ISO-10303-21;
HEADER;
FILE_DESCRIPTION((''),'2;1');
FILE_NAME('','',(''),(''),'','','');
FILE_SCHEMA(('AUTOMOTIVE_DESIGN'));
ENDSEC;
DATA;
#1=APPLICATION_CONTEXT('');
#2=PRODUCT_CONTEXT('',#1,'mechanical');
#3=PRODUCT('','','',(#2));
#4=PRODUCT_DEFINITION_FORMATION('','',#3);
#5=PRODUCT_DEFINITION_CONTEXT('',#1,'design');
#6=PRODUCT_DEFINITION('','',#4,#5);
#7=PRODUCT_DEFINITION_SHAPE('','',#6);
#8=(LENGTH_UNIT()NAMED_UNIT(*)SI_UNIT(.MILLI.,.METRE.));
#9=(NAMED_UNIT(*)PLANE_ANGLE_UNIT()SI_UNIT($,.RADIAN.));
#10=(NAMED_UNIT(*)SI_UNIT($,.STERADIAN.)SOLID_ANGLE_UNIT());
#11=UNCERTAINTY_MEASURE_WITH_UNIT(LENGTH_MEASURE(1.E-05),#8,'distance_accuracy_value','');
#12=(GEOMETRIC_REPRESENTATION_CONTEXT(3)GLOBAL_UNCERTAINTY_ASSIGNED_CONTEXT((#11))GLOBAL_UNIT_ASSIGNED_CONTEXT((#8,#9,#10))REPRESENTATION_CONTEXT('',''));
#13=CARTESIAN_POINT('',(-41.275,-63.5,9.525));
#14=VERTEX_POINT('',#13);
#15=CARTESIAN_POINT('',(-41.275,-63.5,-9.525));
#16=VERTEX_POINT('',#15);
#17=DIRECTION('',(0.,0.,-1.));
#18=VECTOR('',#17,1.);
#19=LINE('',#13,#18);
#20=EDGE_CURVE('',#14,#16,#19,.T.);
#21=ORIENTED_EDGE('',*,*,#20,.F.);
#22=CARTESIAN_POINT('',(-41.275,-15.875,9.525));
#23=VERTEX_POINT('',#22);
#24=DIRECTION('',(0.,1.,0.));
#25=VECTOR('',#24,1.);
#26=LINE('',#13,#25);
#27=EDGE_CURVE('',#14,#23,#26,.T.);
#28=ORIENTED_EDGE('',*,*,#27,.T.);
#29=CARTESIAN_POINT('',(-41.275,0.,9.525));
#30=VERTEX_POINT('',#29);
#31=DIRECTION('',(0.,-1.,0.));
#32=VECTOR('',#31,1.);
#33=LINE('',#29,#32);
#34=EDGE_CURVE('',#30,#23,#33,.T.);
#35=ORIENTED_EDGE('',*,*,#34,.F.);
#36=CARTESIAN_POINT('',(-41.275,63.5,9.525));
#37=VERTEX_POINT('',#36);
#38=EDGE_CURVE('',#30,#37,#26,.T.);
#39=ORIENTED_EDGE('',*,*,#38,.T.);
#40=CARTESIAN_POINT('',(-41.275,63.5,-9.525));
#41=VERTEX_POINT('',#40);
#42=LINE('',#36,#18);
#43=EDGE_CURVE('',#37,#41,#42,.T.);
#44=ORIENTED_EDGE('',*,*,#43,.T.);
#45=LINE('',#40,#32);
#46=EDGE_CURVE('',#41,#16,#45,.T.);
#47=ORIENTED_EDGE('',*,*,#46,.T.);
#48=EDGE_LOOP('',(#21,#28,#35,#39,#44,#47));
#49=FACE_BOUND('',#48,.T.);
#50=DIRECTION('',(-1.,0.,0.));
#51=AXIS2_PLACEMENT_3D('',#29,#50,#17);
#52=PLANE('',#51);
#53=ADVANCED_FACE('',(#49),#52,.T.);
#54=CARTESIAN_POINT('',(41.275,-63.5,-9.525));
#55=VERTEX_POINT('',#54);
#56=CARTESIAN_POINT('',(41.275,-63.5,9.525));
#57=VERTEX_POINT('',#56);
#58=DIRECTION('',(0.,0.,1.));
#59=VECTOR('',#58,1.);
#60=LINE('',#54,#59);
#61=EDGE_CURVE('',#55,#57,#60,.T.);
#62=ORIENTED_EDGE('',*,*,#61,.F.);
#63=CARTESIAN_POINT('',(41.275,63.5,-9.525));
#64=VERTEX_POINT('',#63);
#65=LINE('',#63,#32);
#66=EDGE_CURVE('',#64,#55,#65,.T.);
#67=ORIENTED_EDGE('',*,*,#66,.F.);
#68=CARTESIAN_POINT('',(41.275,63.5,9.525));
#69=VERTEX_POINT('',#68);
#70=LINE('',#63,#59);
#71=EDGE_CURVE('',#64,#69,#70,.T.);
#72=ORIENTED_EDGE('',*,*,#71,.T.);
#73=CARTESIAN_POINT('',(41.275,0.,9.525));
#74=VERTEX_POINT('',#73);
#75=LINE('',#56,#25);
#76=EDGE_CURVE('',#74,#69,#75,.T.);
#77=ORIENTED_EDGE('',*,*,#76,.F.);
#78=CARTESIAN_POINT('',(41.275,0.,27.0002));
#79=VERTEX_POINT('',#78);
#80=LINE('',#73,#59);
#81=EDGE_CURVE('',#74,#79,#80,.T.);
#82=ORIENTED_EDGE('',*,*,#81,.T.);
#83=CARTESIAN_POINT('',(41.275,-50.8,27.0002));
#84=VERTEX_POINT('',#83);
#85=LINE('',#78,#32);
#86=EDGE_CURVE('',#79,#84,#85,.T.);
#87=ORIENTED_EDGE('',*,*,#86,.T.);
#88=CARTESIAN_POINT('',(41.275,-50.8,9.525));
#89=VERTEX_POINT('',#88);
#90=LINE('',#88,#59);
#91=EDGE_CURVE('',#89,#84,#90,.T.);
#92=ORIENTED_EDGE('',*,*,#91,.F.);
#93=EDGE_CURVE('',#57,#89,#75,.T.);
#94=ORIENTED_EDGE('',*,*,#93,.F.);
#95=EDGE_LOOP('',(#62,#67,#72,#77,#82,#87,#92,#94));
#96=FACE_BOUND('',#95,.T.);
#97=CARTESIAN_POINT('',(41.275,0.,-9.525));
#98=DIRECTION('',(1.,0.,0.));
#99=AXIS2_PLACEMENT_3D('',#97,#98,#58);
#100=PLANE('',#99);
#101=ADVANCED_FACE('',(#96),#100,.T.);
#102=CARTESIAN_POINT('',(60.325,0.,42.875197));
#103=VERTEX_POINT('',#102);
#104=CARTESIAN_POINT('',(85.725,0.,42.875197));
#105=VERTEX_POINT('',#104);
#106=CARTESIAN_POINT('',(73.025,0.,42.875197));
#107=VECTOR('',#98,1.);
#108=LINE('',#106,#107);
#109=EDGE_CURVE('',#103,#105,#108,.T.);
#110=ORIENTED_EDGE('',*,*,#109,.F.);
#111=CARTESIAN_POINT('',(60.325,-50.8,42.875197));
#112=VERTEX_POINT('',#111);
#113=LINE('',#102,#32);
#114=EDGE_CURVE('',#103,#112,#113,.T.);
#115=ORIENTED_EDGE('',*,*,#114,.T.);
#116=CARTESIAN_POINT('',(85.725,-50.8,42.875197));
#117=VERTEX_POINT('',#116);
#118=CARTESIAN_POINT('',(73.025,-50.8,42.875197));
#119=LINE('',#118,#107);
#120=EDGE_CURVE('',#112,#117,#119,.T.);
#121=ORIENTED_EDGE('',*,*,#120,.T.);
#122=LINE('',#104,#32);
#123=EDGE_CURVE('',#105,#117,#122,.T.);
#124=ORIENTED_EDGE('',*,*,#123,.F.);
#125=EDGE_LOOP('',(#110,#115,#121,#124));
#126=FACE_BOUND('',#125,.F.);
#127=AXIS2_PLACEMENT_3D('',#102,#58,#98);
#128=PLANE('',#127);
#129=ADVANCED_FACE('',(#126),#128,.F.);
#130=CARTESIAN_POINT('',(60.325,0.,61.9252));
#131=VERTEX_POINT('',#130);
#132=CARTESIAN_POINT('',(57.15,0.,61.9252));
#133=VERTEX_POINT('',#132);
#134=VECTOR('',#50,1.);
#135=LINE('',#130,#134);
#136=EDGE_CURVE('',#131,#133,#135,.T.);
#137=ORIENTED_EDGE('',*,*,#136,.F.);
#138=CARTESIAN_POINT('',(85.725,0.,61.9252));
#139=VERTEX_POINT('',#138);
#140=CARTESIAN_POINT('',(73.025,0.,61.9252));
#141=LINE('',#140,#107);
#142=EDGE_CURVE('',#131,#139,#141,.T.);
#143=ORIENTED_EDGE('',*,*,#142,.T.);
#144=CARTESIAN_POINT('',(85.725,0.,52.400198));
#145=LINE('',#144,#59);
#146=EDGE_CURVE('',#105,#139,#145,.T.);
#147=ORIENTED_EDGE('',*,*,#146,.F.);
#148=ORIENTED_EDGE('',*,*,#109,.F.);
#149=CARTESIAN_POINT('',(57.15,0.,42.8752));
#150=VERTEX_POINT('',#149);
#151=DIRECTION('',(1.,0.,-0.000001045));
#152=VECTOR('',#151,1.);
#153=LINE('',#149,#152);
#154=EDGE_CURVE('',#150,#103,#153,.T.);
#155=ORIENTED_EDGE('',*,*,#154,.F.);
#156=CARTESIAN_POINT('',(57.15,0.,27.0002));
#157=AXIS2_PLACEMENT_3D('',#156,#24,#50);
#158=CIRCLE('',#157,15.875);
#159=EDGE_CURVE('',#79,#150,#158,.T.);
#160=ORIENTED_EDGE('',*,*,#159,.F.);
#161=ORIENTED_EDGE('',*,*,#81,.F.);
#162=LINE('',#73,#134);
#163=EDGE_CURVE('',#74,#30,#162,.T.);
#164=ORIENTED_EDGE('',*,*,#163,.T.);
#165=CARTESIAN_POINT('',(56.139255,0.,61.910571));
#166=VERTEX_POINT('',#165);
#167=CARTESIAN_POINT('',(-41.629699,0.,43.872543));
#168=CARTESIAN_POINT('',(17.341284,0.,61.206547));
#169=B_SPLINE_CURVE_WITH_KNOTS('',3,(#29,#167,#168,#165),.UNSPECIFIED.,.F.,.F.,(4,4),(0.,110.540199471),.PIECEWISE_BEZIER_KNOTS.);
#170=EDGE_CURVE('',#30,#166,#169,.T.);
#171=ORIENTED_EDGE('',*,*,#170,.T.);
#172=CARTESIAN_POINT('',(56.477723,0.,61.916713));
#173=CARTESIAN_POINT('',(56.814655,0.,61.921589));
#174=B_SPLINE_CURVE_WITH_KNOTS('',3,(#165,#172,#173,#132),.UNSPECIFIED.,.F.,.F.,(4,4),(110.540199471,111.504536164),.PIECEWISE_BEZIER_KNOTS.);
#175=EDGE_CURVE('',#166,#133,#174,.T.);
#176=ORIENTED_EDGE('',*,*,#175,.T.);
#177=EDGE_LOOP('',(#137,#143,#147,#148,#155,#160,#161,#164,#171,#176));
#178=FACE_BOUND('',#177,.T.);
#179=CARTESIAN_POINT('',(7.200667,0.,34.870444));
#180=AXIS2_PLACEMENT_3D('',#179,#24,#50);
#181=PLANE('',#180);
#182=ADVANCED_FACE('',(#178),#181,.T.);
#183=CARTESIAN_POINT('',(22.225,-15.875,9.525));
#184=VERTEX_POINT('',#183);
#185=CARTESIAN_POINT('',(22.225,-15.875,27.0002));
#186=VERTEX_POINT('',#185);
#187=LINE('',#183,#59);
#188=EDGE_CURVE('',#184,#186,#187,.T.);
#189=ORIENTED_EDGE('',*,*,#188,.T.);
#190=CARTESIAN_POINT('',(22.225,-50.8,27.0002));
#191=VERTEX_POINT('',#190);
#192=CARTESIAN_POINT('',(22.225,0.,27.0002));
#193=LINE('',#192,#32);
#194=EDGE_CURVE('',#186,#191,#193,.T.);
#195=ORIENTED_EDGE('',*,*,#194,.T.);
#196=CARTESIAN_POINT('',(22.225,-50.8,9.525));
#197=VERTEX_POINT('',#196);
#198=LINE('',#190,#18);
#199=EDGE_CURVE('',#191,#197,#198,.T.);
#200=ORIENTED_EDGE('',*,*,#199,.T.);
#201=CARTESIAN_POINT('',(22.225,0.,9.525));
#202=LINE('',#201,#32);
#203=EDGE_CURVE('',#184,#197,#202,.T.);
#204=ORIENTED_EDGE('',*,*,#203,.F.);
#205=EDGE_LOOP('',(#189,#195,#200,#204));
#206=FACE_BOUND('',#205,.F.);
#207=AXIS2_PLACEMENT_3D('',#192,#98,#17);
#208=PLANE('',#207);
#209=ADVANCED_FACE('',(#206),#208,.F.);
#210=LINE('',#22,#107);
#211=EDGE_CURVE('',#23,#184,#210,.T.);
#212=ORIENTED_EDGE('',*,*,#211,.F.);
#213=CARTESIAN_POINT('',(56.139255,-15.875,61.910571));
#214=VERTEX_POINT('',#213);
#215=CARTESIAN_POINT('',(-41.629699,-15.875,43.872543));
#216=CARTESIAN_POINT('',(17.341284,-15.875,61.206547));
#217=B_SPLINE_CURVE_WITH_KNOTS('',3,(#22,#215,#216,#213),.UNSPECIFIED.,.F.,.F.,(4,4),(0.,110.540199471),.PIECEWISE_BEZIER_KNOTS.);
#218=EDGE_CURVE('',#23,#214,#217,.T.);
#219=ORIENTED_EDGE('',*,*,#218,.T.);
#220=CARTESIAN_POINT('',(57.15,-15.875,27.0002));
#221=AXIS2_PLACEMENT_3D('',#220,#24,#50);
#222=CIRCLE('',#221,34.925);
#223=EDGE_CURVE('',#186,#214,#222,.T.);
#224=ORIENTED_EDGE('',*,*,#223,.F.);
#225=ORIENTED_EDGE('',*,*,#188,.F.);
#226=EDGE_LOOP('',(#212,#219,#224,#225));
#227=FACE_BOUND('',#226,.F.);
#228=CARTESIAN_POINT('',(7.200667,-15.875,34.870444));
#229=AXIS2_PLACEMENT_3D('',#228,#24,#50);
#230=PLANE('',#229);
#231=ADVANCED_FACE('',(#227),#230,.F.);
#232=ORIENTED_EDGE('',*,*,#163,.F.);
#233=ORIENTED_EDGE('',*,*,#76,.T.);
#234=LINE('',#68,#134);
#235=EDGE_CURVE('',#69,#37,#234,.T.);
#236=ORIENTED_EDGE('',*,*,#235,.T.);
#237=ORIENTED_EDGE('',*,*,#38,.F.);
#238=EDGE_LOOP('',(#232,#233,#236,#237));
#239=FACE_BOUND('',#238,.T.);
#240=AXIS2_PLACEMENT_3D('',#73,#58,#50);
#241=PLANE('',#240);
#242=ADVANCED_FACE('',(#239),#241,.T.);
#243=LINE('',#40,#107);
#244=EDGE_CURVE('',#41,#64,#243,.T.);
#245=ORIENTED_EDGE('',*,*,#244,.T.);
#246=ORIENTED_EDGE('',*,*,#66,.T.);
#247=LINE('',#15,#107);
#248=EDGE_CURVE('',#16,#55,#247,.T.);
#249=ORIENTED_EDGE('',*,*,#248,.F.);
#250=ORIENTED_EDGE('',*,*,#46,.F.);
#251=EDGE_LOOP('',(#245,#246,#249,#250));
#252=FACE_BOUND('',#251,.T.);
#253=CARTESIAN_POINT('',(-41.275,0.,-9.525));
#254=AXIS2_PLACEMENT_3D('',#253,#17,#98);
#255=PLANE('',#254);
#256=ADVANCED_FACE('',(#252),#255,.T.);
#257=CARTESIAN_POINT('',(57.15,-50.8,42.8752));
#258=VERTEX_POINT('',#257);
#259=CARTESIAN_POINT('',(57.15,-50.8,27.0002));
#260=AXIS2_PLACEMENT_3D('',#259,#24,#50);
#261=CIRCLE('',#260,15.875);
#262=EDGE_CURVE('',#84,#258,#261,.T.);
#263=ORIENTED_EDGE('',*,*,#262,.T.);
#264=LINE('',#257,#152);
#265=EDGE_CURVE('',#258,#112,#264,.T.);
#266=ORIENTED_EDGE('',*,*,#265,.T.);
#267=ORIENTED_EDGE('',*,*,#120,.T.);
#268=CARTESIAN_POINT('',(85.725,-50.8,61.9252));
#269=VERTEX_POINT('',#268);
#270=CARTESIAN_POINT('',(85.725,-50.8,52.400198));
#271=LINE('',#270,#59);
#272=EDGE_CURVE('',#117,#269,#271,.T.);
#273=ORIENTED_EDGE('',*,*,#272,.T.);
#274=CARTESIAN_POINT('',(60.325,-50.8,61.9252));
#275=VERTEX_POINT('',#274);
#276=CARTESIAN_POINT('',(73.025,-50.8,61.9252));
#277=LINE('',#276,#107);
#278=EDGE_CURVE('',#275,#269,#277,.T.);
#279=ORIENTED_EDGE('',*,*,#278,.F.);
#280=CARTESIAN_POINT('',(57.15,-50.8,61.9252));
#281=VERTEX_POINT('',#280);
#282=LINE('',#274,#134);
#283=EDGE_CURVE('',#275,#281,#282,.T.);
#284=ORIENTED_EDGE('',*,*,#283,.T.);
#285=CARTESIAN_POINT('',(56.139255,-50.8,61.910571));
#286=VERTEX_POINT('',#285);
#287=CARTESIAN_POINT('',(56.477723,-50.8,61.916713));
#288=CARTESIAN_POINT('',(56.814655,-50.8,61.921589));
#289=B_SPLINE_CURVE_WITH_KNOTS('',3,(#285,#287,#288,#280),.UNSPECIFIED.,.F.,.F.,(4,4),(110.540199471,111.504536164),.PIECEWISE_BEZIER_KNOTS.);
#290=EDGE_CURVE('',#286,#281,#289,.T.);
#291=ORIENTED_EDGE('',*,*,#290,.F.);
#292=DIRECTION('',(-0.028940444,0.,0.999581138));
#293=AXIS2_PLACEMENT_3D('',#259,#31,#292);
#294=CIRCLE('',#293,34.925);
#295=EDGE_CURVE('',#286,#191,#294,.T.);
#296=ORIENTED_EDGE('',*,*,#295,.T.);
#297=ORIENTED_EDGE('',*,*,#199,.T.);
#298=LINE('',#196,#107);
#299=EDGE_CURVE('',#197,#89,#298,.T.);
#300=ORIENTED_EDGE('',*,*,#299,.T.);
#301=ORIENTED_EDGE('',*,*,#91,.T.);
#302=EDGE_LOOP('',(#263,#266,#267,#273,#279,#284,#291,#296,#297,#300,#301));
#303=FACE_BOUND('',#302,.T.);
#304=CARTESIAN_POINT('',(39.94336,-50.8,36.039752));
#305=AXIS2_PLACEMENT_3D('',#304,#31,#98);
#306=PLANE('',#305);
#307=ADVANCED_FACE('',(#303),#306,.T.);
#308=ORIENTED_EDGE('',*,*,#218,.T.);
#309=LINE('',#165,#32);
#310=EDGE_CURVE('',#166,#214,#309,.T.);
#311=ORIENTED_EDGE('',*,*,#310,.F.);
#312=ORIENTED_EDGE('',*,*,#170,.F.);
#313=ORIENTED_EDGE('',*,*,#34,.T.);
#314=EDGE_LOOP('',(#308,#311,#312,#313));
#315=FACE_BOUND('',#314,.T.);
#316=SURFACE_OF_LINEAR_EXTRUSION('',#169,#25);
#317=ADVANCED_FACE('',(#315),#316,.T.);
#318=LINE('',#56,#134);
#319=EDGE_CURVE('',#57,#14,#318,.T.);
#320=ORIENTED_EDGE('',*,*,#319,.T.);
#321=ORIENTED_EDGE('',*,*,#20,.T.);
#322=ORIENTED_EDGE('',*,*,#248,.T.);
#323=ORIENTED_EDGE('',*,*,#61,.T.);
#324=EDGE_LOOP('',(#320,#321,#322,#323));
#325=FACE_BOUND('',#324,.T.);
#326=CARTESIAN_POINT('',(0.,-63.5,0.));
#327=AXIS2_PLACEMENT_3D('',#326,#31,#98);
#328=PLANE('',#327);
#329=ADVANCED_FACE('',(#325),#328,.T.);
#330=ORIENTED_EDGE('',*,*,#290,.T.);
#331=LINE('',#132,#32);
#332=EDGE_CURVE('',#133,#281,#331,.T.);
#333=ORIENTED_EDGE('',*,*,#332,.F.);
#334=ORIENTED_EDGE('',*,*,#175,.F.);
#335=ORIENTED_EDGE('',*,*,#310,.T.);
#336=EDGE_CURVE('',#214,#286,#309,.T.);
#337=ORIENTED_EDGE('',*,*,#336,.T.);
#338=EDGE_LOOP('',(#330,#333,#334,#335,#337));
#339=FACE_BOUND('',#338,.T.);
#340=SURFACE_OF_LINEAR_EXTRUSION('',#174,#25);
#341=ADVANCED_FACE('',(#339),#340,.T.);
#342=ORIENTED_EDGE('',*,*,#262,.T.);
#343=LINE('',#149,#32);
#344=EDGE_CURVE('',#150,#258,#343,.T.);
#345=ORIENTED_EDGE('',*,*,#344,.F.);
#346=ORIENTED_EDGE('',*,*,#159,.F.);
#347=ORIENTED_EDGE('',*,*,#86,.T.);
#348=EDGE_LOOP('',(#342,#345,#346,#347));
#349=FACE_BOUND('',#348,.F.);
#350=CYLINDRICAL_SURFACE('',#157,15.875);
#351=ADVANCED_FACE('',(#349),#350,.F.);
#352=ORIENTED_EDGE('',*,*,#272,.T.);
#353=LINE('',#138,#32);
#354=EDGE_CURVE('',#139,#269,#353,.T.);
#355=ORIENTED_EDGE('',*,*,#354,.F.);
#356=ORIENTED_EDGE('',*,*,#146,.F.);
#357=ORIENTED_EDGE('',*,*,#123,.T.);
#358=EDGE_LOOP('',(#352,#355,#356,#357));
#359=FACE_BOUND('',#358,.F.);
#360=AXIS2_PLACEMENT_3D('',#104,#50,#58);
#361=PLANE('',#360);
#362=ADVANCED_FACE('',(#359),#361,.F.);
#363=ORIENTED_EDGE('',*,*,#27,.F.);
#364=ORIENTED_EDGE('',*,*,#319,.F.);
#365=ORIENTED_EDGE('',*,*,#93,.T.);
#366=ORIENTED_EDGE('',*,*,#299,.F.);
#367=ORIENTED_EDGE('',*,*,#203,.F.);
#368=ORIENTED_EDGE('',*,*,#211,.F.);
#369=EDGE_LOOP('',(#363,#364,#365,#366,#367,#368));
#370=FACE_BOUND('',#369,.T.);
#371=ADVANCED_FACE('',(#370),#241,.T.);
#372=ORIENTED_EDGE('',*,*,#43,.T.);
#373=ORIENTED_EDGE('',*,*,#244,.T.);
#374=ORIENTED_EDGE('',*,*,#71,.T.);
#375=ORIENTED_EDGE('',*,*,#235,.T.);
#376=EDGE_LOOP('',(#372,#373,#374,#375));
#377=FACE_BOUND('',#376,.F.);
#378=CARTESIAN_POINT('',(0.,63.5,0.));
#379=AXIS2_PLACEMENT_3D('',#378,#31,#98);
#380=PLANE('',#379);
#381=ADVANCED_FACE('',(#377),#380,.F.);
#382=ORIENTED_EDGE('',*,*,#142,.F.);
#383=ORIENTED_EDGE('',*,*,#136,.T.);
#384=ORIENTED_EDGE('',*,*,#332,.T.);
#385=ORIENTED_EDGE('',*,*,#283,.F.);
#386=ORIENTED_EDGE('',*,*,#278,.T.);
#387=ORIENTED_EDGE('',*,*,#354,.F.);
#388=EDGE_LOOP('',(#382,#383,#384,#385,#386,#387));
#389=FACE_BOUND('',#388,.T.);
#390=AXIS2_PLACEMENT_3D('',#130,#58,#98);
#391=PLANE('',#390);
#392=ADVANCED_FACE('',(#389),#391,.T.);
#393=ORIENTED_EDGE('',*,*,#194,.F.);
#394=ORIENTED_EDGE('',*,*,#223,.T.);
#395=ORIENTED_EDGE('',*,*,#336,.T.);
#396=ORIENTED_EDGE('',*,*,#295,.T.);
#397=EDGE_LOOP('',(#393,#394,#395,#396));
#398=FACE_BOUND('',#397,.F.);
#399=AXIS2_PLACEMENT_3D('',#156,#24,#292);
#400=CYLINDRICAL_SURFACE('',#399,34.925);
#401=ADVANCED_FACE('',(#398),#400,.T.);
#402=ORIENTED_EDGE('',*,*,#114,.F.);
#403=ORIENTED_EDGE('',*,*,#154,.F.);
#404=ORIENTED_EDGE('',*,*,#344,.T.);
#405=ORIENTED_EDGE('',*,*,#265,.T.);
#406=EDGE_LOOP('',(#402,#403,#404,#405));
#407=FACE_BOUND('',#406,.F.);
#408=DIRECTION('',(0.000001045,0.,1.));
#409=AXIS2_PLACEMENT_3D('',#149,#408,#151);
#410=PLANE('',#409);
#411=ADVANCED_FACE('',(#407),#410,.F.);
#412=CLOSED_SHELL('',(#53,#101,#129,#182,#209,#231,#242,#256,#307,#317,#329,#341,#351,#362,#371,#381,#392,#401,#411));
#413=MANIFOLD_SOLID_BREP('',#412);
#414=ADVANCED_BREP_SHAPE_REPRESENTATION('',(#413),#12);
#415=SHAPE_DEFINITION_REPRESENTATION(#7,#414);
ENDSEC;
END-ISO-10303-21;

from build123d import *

# Parameters (mm, degrees)
F1_DEPTH = 63.5
F0_W     = 25.4
F0_H     = 19.0500033191
F2_DEPTH = 50.8
F3_DEPTH = 15.875


# Not quite as in the source:
# - ends of sketch curves that miss each other by under 0.0002 mm in the source are joined


with BuildPart() as f1:
    # F0 (on Front) → F1 (new body, symmetric)
    with BuildSketch(Plane.XZ):
        Polygon((-41.275, 9.525), (-41.275, -9.525), (41.275, -9.525), (41.275, 9.525), (22.225, 9.525), align=None)
    extrude(amount=F1_DEPTH, both=True)

    # F0 (on Front) → F2 (join)
    with BuildSketch(Plane.XZ):
        with BuildLine():
            Line((22.225, 9.525), (41.275, 9.525))
            Line((41.275, 9.525), (41.275, 27.0002))
            ThreePointArc((41.275, 27.0002), (45.9246798487, 38.2255201513), (57.15, 42.8752))
            Line((57.15, 42.8752), (60.325, 42.8751966809))
            Line((60.325, 42.8751966809), (60.325, 61.9252))
            Line((60.325, 61.9252), (57.15, 61.9252))
            add(Edge.make_bspline(
                [(56.1392549791, 61.9105712312), (56.4777228602, 61.916713038), (56.8146554612, 61.9215892093), (57.15, 61.9252)],
                knots=[110.5401994714, 110.5401994714, 110.5401994714, 110.5401994714, 111.5045361635, 111.5045361635, 111.5045361635, 111.5045361635], degree=3))
            ThreePointArc((56.1392549791, 61.9105712312), (32.0994920725, 51.3359284167), (22.225, 27.0002))
            Line((22.225, 27.0002), (22.225, 9.525))
        make_face()
        with Locations((73.025, 52.4001983404)):
            Rectangle(F0_W, F0_H)
    extrude(amount=F2_DEPTH)

    # F0 (on Front) → F3 (join)
    with BuildSketch(Plane.XZ):
        with BuildLine():
            add(Edge.make_bspline(
                [(-41.275, 9.525), (-41.6296994967, 43.8725434099), (17.341283892, 61.2065468529), (56.1392549791, 61.9105712312)],
                knots=[0, 0, 0, 0, 110.5401994714, 110.5401994714, 110.5401994714, 110.5401994714], degree=3))
            Line((-41.275, 9.525), (22.225, 9.525))
            Line((22.225, 9.525), (22.225, 27.0002))
            ThreePointArc((22.225, 27.0002), (32.0994920725, 51.3359284167), (56.1392549791, 61.9105712312))
        make_face()
    extrude(amount=F3_DEPTH)


solid = f1.part
